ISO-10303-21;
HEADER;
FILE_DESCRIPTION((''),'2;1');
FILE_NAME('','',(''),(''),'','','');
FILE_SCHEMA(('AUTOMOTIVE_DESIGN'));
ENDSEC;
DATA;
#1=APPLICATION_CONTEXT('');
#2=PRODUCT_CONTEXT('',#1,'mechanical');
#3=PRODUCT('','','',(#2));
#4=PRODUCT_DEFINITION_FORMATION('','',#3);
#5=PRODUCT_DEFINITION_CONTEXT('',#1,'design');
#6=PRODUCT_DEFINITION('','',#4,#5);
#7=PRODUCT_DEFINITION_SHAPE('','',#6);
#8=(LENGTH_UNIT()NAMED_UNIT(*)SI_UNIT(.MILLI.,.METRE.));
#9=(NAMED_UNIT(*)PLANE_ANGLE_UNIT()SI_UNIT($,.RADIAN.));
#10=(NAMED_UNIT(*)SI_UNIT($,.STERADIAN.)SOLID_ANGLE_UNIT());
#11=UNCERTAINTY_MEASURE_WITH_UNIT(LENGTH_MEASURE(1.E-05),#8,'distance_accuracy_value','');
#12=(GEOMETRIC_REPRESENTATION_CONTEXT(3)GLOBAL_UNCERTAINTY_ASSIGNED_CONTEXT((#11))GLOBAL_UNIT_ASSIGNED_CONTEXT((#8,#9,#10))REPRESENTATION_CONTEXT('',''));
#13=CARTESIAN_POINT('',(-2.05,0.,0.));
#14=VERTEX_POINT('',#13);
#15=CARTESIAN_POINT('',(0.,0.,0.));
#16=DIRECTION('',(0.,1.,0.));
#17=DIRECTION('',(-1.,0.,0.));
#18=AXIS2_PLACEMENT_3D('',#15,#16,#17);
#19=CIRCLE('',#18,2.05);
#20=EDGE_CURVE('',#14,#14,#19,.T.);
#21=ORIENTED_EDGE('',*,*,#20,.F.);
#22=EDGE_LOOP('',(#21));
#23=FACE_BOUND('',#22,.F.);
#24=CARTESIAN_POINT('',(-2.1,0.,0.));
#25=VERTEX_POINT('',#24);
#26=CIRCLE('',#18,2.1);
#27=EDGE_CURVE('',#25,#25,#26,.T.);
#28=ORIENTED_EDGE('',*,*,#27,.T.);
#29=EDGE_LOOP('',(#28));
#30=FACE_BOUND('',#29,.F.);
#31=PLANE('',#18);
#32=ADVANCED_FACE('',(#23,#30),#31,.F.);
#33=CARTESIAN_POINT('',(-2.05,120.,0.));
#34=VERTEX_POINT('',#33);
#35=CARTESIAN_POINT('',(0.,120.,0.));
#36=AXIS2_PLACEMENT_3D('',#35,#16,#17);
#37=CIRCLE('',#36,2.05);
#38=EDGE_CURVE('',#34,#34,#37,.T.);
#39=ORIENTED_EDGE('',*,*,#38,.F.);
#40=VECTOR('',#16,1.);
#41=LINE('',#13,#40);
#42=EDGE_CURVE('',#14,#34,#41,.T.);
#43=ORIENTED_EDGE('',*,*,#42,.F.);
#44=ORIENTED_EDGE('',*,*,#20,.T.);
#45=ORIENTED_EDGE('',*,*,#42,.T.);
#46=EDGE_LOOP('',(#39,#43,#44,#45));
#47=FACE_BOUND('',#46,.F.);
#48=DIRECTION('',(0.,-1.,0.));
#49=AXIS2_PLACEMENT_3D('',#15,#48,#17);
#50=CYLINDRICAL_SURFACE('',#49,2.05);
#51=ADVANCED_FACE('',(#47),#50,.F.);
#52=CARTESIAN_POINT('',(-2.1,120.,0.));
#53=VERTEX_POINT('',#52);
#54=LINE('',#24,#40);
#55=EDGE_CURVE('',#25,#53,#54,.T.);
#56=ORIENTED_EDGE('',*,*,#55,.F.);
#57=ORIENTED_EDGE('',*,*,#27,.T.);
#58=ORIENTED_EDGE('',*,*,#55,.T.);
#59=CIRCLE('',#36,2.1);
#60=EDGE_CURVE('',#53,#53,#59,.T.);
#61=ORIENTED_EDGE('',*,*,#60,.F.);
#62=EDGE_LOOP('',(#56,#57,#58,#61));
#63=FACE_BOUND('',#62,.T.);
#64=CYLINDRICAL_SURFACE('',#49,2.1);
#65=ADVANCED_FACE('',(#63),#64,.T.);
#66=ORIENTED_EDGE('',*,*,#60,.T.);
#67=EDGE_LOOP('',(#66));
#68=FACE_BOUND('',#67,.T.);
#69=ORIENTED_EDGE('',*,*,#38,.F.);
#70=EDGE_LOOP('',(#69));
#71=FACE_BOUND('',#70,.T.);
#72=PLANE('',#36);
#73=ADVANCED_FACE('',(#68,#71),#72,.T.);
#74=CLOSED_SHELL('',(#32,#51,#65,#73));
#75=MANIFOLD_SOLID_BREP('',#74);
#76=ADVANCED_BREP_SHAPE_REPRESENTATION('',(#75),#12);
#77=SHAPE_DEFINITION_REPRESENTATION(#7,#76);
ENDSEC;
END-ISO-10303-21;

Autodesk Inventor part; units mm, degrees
ref_plane "YZ Plane" through (0, 0, 0) normal (1, 0, 0) x (0, 1, 0)
ref_plane "XZ Plane" through (0, 0, 0) normal (0, 1, 0) x (-1, 0, 0)
ref_plane "XY Plane" through (0, 0, 0) normal (0, 0, 1) x (1, 0, 0)
sketch "Sketch1" plane through (0, 0, 0) normal (0, 1, 0) x (-1, 0, 0)
  circle A0 centre (0, 0) radius 2.05
  circle A1 centre (0, 0) radius 2.1
  dimension "d0" = 4.1
  dimension "d1" = 4.2
extrude "Extrusion1" add sketch "Sketch1" along normal blind 120
properties part number "dummy_mckibben_pam_sleeve_4.2mm_cut"
